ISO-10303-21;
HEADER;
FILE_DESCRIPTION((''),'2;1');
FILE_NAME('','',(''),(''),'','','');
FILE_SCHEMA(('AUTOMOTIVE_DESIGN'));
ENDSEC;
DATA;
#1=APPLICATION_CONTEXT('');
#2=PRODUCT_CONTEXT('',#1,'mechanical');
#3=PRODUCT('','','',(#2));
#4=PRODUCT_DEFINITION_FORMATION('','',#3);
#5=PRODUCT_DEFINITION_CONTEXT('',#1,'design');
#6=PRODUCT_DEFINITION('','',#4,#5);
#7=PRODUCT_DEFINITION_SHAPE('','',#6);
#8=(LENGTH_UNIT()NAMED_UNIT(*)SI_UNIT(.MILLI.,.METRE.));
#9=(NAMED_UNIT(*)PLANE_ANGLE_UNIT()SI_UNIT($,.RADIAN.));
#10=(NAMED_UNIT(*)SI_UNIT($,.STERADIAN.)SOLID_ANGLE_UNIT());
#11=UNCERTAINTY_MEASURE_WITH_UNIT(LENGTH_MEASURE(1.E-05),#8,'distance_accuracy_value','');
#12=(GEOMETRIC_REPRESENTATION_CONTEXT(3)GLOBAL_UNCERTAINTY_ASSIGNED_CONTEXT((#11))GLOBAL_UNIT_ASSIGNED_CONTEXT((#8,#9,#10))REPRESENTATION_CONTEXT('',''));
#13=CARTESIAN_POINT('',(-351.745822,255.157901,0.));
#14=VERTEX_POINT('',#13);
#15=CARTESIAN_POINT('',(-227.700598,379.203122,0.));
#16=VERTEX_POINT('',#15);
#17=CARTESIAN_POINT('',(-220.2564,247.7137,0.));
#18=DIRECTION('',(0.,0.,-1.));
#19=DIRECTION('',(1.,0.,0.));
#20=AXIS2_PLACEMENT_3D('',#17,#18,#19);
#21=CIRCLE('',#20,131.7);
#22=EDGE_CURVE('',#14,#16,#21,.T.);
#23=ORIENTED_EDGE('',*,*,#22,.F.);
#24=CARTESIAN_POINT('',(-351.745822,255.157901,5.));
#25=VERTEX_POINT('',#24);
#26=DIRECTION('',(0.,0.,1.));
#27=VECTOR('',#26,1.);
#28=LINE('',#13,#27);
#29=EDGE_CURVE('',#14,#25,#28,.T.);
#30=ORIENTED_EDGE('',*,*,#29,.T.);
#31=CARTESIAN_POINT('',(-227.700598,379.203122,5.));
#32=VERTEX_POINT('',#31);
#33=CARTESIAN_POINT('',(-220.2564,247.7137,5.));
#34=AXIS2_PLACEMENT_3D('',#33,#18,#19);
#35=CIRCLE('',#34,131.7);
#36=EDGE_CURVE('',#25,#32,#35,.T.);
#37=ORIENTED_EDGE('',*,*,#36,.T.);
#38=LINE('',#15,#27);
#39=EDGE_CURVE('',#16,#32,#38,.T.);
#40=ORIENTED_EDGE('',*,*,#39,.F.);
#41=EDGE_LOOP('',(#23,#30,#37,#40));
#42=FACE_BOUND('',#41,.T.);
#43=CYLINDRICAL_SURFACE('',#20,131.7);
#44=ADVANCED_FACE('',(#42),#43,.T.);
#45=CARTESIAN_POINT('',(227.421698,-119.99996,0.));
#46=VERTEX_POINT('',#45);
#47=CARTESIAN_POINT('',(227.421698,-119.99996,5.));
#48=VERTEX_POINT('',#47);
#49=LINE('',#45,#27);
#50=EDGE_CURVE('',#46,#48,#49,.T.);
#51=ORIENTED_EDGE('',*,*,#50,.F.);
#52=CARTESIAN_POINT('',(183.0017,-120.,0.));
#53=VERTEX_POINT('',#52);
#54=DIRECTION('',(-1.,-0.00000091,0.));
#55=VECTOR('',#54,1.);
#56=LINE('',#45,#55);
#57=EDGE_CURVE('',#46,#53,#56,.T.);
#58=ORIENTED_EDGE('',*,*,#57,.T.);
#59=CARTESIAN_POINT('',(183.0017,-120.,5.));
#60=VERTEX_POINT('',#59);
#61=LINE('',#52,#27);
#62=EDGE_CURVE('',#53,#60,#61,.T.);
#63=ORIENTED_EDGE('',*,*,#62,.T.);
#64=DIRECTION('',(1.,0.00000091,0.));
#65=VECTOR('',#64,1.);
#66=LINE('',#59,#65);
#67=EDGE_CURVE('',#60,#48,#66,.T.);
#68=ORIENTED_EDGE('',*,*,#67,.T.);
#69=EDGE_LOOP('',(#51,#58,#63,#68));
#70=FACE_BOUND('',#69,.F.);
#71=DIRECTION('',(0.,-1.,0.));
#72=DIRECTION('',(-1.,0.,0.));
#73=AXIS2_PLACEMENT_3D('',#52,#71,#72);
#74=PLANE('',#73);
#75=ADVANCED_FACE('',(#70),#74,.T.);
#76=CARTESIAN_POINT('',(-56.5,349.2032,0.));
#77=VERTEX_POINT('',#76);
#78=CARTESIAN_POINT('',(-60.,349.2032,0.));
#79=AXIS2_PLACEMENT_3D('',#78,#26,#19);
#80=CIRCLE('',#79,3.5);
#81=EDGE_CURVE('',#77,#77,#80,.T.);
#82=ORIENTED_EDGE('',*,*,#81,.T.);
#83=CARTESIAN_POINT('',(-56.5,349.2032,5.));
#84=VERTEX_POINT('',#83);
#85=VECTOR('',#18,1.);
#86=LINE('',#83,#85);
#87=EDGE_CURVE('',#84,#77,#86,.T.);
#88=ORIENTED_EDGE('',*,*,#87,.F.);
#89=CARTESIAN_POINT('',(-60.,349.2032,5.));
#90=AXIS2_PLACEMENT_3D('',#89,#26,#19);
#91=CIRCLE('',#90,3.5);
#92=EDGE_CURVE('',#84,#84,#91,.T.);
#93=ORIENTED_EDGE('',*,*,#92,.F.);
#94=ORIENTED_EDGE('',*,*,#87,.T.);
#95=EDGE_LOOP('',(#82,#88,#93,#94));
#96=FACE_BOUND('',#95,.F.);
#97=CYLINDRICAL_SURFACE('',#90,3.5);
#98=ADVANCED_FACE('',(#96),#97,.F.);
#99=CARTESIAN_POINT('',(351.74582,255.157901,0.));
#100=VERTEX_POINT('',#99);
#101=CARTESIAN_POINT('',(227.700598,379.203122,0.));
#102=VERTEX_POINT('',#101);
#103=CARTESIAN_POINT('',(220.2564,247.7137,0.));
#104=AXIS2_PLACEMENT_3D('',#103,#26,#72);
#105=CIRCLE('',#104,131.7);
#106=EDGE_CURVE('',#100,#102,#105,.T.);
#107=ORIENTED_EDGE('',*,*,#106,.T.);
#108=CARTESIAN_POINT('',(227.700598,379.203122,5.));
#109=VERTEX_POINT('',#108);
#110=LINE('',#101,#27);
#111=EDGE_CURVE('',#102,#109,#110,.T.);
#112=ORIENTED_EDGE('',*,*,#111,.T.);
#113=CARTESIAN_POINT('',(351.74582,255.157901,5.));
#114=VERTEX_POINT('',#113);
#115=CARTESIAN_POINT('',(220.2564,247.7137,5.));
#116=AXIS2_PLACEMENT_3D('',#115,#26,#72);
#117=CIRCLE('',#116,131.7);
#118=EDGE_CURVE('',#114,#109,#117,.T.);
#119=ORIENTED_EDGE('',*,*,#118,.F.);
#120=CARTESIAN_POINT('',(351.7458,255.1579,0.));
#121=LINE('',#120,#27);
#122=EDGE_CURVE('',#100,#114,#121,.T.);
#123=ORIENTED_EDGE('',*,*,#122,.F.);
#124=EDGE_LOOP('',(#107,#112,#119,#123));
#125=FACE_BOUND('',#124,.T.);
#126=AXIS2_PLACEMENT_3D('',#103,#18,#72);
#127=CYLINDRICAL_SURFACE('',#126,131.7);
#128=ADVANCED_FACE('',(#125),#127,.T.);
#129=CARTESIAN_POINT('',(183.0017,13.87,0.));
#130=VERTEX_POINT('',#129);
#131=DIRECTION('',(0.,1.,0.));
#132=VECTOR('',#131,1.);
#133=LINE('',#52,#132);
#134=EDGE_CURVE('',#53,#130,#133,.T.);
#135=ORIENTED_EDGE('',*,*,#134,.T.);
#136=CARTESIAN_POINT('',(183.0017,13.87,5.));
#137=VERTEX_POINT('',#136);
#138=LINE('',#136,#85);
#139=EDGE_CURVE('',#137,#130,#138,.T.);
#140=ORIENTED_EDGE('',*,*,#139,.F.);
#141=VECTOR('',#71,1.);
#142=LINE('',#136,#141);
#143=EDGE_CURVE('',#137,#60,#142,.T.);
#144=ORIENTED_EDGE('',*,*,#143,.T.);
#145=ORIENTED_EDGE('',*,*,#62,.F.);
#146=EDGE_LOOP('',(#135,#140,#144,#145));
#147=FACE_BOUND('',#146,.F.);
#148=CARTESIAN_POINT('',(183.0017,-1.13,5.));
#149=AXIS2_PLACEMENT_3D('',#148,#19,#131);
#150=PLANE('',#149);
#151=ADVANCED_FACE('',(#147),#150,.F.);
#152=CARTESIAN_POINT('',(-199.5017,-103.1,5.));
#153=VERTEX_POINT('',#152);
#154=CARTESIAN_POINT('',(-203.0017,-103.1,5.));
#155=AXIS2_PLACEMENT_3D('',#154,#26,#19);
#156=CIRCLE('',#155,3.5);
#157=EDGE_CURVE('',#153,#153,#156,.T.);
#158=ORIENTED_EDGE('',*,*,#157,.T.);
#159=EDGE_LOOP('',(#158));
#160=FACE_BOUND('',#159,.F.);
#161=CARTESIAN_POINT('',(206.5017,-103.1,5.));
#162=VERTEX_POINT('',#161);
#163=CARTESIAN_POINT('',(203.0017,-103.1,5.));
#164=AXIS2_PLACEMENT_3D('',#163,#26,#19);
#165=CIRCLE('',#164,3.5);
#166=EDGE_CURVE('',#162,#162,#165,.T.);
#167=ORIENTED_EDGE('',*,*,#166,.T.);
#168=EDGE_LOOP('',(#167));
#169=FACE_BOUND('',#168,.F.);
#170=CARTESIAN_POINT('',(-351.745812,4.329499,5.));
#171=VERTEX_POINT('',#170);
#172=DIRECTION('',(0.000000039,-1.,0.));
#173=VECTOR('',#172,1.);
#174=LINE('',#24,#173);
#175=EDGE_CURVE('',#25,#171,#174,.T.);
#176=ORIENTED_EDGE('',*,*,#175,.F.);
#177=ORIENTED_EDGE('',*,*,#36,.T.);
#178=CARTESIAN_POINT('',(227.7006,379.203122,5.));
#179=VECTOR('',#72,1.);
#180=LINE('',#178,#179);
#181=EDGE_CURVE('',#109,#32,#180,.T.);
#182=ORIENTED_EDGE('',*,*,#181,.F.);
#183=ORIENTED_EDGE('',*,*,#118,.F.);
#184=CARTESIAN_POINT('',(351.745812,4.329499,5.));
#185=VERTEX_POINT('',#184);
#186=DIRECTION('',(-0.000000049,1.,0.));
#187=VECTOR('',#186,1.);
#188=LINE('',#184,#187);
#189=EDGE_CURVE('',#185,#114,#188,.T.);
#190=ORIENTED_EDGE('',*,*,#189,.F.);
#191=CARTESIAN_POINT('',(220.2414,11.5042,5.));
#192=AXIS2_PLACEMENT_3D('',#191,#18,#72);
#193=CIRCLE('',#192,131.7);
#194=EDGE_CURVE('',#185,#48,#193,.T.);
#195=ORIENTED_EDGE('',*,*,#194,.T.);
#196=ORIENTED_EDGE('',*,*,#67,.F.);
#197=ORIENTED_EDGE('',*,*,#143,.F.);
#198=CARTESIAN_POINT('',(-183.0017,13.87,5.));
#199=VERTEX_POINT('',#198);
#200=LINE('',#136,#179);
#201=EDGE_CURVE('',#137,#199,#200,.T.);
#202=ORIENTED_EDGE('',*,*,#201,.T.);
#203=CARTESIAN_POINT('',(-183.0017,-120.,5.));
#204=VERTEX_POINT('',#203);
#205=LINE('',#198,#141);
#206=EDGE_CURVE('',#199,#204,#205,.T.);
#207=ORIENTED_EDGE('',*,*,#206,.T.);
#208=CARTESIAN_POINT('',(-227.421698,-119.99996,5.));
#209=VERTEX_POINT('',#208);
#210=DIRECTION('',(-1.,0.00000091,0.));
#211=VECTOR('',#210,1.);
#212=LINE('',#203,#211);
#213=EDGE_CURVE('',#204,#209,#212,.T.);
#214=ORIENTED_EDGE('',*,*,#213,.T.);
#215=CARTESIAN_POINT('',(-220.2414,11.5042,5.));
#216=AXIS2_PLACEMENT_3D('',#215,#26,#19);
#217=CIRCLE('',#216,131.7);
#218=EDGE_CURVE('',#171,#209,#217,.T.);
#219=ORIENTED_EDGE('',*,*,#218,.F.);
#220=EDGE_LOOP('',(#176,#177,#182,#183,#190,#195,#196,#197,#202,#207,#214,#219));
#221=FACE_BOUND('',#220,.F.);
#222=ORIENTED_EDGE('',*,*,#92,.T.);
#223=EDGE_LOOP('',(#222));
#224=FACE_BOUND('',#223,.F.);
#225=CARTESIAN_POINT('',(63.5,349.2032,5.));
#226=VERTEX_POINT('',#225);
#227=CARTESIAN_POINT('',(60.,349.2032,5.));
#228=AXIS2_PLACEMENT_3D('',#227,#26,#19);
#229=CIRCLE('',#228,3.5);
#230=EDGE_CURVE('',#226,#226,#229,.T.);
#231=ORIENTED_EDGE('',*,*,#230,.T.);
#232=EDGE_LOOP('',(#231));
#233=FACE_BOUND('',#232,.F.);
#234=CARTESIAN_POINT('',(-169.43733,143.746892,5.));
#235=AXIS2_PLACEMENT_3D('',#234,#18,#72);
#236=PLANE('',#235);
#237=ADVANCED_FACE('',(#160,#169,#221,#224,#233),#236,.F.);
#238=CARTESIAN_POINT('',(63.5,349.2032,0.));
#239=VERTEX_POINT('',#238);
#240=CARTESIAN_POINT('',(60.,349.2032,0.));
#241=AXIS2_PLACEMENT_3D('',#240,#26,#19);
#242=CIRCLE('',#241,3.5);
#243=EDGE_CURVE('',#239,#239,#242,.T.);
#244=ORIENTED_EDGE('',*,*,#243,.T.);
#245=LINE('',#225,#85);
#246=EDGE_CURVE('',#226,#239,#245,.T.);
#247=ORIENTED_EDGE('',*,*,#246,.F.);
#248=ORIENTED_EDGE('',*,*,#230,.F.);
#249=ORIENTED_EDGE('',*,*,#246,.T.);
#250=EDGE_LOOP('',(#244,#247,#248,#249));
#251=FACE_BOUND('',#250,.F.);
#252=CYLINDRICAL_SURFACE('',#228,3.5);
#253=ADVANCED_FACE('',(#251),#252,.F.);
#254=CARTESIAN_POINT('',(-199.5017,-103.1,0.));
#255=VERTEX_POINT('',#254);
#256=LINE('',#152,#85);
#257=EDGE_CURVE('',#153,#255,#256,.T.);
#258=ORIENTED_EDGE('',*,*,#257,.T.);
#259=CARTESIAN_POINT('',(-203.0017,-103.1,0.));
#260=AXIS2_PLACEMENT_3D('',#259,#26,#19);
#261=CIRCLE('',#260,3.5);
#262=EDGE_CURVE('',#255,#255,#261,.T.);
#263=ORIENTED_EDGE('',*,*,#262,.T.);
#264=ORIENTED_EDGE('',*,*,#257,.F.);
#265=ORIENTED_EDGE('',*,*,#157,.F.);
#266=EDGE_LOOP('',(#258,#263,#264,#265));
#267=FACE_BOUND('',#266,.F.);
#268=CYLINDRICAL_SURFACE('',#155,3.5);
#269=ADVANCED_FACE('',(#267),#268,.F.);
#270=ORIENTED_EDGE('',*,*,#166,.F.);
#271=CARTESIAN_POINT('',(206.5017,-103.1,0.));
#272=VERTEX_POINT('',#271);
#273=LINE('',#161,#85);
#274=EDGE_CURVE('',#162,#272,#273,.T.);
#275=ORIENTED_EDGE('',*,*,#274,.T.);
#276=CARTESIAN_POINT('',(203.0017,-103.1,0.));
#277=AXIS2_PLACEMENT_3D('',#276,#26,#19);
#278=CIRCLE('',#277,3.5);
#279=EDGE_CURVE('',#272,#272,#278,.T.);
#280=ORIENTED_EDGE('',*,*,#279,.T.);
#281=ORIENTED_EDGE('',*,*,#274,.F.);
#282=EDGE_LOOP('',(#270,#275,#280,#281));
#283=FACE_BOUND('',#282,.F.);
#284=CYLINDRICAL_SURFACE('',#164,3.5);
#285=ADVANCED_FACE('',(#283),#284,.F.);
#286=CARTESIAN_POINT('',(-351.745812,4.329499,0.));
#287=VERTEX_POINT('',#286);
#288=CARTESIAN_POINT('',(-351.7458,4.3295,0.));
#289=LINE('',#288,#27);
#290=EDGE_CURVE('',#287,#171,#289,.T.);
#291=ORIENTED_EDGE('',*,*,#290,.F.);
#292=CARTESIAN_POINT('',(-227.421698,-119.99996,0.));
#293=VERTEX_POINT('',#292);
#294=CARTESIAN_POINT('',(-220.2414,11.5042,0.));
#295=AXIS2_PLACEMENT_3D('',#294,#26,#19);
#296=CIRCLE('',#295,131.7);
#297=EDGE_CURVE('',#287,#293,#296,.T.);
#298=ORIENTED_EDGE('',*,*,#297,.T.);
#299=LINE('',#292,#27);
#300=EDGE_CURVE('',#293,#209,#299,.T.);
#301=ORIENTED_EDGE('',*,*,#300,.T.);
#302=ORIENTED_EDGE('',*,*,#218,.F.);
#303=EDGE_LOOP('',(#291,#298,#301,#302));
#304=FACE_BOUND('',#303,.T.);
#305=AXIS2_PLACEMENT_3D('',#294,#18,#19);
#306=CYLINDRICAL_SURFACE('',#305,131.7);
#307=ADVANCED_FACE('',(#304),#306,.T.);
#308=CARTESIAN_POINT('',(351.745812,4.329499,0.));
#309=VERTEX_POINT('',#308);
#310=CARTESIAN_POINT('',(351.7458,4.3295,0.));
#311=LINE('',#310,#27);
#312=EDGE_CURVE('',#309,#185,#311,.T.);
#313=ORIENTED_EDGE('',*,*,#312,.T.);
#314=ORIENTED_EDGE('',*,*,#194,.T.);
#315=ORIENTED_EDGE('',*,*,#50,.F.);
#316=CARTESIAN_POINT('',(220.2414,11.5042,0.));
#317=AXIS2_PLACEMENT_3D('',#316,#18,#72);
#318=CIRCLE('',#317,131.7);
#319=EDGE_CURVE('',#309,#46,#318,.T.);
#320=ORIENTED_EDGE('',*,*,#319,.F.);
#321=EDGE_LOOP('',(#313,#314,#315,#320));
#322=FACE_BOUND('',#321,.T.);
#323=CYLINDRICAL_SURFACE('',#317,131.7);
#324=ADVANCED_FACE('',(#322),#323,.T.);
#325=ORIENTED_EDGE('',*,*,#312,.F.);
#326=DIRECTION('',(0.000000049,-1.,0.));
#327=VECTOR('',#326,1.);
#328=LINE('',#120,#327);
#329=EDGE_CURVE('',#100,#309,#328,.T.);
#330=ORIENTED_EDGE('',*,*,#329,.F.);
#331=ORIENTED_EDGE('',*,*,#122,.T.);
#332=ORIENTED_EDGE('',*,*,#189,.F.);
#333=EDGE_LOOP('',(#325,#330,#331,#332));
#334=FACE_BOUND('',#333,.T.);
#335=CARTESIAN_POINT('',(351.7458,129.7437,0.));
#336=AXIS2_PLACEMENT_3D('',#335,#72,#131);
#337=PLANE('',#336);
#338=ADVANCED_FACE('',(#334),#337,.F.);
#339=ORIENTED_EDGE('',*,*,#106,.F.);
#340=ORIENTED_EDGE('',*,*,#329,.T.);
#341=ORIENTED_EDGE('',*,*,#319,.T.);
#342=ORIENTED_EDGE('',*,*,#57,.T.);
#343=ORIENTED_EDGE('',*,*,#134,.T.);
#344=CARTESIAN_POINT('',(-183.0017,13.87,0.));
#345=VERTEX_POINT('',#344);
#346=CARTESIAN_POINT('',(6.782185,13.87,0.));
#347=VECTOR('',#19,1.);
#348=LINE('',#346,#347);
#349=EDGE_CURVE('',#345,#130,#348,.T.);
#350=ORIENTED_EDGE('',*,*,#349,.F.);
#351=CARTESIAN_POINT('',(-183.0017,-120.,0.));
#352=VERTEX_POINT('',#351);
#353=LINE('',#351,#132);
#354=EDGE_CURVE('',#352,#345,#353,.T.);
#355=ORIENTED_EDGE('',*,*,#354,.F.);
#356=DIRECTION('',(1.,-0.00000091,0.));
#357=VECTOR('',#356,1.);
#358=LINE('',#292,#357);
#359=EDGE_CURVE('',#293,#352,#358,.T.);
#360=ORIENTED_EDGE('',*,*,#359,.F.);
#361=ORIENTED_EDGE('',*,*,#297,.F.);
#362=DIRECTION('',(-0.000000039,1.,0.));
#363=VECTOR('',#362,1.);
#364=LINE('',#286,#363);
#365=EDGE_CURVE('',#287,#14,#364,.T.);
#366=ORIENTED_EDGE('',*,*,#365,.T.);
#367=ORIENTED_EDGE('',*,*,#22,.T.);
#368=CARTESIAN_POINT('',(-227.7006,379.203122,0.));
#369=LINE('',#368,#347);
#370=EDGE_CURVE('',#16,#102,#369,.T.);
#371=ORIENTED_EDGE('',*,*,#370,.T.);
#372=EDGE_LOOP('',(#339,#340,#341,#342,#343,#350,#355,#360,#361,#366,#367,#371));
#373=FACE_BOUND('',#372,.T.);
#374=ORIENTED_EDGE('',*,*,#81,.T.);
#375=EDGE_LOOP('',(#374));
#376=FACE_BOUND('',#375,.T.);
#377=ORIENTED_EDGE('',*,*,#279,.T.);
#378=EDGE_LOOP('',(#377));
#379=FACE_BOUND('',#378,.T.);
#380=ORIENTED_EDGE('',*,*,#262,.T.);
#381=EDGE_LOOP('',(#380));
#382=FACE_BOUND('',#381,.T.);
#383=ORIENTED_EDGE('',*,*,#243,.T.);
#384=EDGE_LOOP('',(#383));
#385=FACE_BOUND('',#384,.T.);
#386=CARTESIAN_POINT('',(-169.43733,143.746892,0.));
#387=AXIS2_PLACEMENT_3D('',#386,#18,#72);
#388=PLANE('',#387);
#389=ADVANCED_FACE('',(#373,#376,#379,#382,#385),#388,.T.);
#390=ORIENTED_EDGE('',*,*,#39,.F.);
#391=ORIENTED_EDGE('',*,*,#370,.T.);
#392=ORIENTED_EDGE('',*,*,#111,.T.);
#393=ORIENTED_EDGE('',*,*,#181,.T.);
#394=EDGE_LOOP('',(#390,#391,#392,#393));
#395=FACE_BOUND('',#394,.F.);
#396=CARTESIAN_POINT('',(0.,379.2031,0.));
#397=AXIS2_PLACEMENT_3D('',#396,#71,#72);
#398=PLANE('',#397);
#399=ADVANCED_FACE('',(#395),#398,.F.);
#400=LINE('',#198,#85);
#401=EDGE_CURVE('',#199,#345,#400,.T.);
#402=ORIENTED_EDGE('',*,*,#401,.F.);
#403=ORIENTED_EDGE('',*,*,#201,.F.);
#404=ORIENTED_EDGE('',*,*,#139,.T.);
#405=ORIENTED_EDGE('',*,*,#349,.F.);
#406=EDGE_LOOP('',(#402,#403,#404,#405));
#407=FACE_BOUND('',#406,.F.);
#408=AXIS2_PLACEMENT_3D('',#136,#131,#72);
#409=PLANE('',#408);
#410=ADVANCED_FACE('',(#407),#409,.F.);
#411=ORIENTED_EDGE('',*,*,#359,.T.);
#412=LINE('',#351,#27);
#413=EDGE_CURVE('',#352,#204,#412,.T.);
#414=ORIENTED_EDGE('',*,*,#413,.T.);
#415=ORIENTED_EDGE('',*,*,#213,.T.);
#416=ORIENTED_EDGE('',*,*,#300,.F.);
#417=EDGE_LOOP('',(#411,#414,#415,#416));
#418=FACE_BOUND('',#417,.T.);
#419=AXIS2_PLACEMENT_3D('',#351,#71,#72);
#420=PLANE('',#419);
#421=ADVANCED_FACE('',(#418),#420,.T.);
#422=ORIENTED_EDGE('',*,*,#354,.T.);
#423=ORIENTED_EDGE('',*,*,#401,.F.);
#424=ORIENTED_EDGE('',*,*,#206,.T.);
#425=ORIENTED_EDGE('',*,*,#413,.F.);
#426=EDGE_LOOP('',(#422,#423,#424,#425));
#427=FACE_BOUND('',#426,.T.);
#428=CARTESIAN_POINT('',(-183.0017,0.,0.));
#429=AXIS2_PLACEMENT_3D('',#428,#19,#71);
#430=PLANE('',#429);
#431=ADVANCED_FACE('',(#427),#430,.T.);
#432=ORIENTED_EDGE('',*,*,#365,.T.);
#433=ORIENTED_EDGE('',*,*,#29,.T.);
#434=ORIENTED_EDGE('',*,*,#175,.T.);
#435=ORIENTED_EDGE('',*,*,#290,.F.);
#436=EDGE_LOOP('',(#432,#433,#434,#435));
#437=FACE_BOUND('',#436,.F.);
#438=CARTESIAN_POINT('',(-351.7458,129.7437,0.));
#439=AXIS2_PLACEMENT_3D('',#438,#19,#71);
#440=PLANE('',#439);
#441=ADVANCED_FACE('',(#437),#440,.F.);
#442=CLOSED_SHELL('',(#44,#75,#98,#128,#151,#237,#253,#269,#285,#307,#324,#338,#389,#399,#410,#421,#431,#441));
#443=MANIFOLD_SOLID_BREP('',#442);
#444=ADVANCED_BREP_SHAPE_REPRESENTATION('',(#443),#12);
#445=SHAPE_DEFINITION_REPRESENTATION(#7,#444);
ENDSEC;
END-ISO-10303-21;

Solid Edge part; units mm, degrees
sketch "Sketch1" plane through (0, 0, 0) normal (0, 0, 1) x (1, 0, 0)
  line L0 (-183.0017, -120) -> (-227.4217, -120)
  line L1 (-289.5811, -57.8353) -> (-227.4217, -120)
  line L2 (-289.5811, -57.8353) -> (-351.7458, 4.3295)
  line L3 (-351.7458, 129.7437) -> (-351.7458, 4.3295)
  line L4 (-351.7458, 129.7437) -> (-351.7458, 255.1579)
  line L5 (-289.4346, 317.4691) -> (-351.7458, 255.1579)
  line L6 (-289.4346, 317.4691) -> (-227.7006, 379.2031)
  line L7 (0, 379.2031) -> (-227.7006, 379.2031)
  line L8 (0, 379.2031) -> (0, 0)
  line L9 (0, 0) -> (-183.0017, 0)
  line L10 (-183.0017, 0) -> (-183.0017, -120)
  dimension "D1" = 351.7458
  dimension "D2" = 227.7006
  dimension "D3" = 120
  dimension "D4" = 44.42
  dimension "D5" = 87.3051
  dimension "D6" = 88.1213
  dimension "D7" = 125.4142
  dimension "D8" = 125.4142
  dimension "D9" = 87.9142
  dimension "D10" = 87.9104
  dimension "D11" = 499.2031
extrude "Protrusion1" add sketch "Sketch1" along normal blind 5
mirror "Mirror1" about plane through (0, 0, 0) normal (1, 0, 0) of "Protrusion1"
sketch "Sketch2" plane through (0, 149.6016, 0) normal (0, 0, -1) x (-1, 0, 0)
  line L0 (-351.7458, -111.1142) -> (-193.1203, -269.6016)
  line L1 (-193.1203, -269.6016) -> (-227.4217, -269.6016)
  arc A0 (-351.7458, -145.2721) -> (-227.4217, -269.6016) centre (-220.2414, -138.0974) ccw
  line L2 (-351.7458, -111.1142) -> (-351.7458, -145.2721)
  dimension "D1" = 131.7
extrude "Protrusion2" add sketch "Sketch2" against normal up to vertex (5 mm away)
sketch "Sketch3" plane through (0, 149.6016, 0) normal (0, 0, -1) x (-1, 0, 0)
  line L0 (-227.7006, 229.6016) -> (-351.7458, 105.5563)
  arc A0 (-351.7458, 105.5563) -> (-227.7006, 229.6016) centre (-220.2564, 98.1121) cw
extrude "Protrusion3" add sketch "Sketch3" against normal up to vertex (5 mm away)
mirror "Mirror2" about plane through (0, 0, 0) normal (1, 0, 0) of "Protrusion3", "Protrusion2"
sketch "Sketch4" plane through (0, 0, 2.5) normal (0, -1, 0) x (1, 0, 0)
  line L0 (-183.0017, 2.5) -> (183.0017, 2.5)
  line L1 (183.0017, 2.5) -> (183.0017, -2.5)
  line L2 (183.0017, -2.5) -> (-183.0017, -2.5)
  line L3 (-183.0017, -2.5) -> (-183.0017, 2.5)
extrude "Protrusion6" add sketch "Sketch4" along normal blind 1.13
sketch "Sketch5" plane through (0, 129.6016, 5) normal (0, 0, 1) x (1, 0, 0)
  line L0 (-183.0017, -130.7316) -> (183.0017, -130.7316)
  line L1 (183.0017, -130.7316) -> (183.0017, -115.7316)
  line L2 (183.0017, -115.7316) -> (-183.0017, -115.7316)
  line L3 (-183.0017, -115.7316) -> (-183.0017, -130.7316)
  dimension "D1" = 15
extrude "Cutout1" cut sketch "Sketch5" against normal through all
sketch "Sketch6" plane through (0, 129.6016, 5) normal (0, 0, 1) x (1, 0, 0)
  circle A0 centre (-203.0017, -232.7016) radius 3.5
  circle A1 centre (203.0017, -232.7016) radius 3.5
  dimension "D1" = 7
  dimension "D2" = 20
  dimension "D3" = 16.9
extrude "Cutout2" cut sketch "Sketch6" against normal through all
sketch "Sketch7" plane through (0, 129.6016, 5) normal (0, 0, 1) x (1, 0, 0)
  circle A0 centre (-60, 219.6016) radius 3.5
  circle A1 centre (60, 219.6016) radius 3.5
  dimension "D1" = 120
  dimension "D2" = 7
  dimension "D3" = 30
extrude "Cutout3" cut sketch "Sketch7" against normal through all
properties material "ABS-Plastik, mittelfest"
